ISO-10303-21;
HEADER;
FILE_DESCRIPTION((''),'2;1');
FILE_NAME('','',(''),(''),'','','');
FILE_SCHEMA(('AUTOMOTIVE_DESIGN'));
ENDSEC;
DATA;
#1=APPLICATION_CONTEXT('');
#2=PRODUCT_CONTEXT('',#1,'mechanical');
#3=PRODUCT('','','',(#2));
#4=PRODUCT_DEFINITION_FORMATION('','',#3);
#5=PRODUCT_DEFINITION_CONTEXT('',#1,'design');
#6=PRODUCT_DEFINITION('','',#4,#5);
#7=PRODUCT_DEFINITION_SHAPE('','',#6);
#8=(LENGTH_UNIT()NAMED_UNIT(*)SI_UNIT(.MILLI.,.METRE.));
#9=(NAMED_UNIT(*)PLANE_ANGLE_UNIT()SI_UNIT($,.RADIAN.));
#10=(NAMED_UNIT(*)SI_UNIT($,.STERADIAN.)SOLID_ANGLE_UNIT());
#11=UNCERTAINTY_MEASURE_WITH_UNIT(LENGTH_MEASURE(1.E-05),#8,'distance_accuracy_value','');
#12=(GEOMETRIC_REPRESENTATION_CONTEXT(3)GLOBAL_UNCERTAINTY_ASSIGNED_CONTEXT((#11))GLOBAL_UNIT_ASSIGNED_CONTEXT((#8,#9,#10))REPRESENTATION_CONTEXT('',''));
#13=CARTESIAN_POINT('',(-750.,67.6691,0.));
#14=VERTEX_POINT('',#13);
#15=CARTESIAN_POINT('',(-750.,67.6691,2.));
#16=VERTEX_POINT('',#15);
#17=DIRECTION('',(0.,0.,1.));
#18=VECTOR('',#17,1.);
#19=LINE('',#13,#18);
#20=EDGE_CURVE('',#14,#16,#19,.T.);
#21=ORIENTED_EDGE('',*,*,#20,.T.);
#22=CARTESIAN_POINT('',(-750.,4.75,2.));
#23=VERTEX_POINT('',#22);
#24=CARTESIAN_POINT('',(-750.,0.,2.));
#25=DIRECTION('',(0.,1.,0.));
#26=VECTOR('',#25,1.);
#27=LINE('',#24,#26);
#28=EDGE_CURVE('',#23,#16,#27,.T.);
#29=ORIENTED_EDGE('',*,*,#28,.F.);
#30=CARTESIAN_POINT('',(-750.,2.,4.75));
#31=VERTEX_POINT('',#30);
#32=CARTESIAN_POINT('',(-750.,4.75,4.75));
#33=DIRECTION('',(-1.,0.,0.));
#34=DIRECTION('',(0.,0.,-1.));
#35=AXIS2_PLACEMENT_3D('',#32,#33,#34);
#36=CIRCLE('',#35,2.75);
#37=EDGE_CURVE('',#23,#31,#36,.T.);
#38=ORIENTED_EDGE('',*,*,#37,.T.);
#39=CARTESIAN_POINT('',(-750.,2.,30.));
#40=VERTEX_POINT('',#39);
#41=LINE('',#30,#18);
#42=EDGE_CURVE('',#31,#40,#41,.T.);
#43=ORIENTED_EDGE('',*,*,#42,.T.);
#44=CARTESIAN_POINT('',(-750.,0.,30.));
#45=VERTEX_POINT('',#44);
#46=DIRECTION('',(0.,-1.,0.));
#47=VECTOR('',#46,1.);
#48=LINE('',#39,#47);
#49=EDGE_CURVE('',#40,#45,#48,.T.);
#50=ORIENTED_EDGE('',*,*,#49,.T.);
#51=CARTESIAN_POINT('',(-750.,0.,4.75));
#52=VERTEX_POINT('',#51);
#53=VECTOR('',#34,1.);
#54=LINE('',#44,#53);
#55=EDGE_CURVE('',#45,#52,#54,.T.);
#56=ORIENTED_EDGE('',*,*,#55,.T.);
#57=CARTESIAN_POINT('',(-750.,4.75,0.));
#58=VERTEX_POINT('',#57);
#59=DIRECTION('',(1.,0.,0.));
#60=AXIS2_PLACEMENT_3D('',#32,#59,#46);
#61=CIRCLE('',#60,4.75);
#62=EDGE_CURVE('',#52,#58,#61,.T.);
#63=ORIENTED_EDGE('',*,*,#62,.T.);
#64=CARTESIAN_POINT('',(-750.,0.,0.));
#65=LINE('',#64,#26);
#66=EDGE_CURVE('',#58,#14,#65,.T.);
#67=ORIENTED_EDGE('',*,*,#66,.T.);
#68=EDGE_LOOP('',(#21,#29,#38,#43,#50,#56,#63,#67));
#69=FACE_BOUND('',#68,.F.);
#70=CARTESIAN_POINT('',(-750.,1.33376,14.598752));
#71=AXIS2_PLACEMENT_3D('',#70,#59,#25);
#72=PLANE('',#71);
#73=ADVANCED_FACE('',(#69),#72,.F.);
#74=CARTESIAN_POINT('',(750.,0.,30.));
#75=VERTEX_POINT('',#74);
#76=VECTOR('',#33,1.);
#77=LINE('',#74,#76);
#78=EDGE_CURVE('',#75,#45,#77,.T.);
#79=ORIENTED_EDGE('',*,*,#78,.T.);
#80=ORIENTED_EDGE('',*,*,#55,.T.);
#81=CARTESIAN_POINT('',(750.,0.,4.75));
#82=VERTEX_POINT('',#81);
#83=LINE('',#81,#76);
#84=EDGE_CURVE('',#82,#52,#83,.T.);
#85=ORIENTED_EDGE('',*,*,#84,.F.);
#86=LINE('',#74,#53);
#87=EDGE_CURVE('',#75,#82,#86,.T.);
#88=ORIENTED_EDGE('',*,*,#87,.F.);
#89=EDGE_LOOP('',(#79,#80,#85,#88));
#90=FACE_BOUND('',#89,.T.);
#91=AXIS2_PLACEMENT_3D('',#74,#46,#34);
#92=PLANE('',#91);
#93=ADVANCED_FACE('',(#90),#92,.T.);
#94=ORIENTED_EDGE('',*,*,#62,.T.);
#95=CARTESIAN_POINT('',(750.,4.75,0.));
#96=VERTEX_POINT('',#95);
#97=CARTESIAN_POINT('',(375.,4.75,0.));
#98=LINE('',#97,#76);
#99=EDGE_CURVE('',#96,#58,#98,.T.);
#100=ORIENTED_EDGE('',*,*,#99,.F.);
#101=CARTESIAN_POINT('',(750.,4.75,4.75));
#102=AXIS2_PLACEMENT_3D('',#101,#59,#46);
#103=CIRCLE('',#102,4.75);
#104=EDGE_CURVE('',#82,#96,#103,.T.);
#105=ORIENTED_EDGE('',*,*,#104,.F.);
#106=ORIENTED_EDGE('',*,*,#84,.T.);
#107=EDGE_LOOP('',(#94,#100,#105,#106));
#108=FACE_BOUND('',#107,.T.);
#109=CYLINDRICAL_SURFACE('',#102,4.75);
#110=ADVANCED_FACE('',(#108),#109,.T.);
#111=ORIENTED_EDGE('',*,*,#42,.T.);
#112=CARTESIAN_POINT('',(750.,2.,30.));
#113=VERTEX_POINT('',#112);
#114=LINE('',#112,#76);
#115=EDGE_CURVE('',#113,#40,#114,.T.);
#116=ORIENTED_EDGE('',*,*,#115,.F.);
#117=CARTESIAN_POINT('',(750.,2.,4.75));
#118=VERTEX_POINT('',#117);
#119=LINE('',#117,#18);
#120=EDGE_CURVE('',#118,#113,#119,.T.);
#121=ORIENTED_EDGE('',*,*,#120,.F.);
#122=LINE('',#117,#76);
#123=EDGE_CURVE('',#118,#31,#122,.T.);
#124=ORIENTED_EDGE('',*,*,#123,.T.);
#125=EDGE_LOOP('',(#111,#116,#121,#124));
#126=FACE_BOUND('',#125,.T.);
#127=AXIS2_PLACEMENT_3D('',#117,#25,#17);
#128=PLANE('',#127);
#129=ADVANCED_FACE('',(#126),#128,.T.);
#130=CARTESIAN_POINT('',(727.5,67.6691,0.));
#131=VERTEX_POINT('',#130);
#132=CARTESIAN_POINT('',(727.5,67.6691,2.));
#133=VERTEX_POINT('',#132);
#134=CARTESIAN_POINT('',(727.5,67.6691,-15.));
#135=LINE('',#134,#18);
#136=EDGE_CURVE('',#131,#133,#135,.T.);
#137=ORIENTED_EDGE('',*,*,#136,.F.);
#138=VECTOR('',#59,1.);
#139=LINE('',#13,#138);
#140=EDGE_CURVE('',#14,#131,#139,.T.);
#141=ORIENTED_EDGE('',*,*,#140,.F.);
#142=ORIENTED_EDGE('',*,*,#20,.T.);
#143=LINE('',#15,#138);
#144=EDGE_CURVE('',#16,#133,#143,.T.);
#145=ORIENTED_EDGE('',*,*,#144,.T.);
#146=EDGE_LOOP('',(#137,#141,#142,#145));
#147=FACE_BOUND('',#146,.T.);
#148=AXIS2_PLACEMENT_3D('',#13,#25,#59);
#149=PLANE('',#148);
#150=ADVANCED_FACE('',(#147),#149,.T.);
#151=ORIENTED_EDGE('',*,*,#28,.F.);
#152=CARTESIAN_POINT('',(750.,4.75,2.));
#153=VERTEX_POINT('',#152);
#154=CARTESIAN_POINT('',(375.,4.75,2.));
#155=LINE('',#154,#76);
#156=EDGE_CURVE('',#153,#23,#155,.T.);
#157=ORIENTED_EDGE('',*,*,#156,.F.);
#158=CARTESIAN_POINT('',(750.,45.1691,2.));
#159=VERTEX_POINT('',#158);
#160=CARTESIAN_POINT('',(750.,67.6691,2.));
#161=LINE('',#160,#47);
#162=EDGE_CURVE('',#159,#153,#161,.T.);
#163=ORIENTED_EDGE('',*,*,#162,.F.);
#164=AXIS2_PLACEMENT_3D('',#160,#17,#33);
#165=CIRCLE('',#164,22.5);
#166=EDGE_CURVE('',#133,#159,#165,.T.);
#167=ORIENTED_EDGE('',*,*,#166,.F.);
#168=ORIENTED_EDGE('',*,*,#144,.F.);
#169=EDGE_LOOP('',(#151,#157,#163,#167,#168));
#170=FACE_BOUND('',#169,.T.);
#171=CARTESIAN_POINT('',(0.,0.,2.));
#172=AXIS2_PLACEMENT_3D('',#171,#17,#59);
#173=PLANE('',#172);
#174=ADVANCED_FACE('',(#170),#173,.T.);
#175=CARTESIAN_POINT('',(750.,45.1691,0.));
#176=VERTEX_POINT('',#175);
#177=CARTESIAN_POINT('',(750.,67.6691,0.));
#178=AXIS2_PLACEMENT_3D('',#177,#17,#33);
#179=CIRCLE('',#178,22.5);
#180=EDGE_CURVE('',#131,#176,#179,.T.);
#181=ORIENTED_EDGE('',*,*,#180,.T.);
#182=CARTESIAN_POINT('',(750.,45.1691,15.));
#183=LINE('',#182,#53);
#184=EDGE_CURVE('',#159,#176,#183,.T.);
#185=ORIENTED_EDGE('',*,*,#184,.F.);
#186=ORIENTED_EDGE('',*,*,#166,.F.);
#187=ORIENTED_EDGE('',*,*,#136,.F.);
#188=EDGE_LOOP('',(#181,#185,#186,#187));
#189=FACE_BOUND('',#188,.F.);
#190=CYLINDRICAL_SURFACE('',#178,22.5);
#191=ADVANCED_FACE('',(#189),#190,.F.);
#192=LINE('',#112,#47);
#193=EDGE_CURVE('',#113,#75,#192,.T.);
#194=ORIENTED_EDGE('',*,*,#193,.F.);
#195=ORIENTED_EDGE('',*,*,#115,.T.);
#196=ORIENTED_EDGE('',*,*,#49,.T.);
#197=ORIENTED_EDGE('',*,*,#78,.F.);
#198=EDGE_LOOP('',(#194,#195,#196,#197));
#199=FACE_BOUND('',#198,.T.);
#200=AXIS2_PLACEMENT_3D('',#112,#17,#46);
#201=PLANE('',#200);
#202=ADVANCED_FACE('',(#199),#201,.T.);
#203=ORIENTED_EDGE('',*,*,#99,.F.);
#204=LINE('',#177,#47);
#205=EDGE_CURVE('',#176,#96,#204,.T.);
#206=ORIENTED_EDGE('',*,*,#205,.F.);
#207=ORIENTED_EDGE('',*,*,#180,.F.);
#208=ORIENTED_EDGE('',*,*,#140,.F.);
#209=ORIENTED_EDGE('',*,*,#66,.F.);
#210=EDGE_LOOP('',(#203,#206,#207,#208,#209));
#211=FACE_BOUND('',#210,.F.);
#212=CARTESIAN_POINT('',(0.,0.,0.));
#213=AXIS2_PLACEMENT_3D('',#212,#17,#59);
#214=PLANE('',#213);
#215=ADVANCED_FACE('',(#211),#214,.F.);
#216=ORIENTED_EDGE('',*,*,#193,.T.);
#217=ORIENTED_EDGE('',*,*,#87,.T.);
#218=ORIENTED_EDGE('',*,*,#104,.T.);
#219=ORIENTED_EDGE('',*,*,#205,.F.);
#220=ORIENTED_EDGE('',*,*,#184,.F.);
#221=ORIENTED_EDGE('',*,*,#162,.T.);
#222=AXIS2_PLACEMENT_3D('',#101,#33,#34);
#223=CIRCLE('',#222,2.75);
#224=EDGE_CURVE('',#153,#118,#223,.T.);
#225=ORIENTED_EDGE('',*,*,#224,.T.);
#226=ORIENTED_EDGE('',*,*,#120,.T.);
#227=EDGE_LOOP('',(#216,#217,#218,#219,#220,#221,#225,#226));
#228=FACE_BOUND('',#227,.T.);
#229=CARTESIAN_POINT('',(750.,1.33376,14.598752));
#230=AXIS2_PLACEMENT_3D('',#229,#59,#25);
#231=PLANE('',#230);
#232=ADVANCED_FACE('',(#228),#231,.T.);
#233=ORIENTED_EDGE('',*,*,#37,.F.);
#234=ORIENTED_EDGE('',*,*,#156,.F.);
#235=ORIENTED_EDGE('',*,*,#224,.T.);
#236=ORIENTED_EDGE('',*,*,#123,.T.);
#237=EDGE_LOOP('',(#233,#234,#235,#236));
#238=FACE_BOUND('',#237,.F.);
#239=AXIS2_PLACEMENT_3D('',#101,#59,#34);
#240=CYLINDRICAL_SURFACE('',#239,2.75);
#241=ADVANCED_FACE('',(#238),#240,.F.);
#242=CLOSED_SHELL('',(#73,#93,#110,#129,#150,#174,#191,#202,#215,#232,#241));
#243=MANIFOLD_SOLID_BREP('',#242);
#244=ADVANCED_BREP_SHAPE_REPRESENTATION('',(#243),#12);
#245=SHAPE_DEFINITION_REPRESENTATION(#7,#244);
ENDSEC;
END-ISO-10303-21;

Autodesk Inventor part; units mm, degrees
ref_plane "YZ Plane" through (0, 0, 0) normal (1, 0, 0) x (0, 1, 0)
ref_plane "XZ Plane" through (0, 0, 0) normal (0, 1, 0) x (-1, 0, 0)
ref_plane "XY Plane" through (0, 0, 0) normal (0, 0, 1) x (1, 0, 0)
sketch "Sketch1" plane through (0, 0, 0) normal (0, 0, 1) x (1, 0, 0)
  line L0 (-750, 67.6691) -> (750, 67.6691)
  line L1 (750, 67.6691) -> (750, 0)
  line L2 (750, 0) -> (-750, 0)
  line L3 (-750, 0) -> (-750, 67.6691)
  point P0 (0, 0)
  point P1 (0, 0)
  dimension "d0" = 1500
  dimension "d1" = 67.669
extrude "Plate1" add sketch "Sketch1" along normal blind 2
sketch "Sketch2" plane through (750, 2, 0) normal (0, -1, 0) x (1, 0, 0)
  line L0 (-1500, 0) -> (0, 0)
  line L1 (0, 0) -> (0, 30)
  line L2 (0, 30) -> (-1500, 30)
  line L3 (-1500, 30) -> (-1500, 0)
edge flange "Flange1" height 30 angle 90 thickness 2 bend radius 2.75 thickness toward (0, -1, 0) relief round relief width 2 relief depth 1 edges at (0, 0, 2) wall of the first edge with corners at (-750, 2, 0) (750, 2, 0) (750, 2, 30) (-750, 2, 30)
bend "Bend1"
corner "Corner1"
sketch "Sketch6" plane through (0, 0, 0) normal (0, 0, -1) x (-1, 0, 0)
  line L0 (-750, 67.6691) -> (-750, 4.75) projected
  circle A0 centre (-750, 67.6691) radius 22.5
  line L1 (-750, 67.6691) -> (750, 67.6691) projected
  line L2 (-1, 67.6691) -> (-1, 30) projected
  line L3 (-499, 30) -> (-499, 67.6691) projected
  line L4 (-1, 30) -> (-499, 30) construction
  circle A1 centre (-250, 67.6691) radius 22.5
  point P0 (0, 0)
  point P1 (-727.5, 67.6691)
  point P2 (-750, 45.1691)
  point P3 (-250, 30)
  dimension "d24" = 45
extrude "Extrusion2" cut sketch "Sketch6" along normal mid plane 30 contours L1 A0 L0 picked at (-748.3311, 52.8571)
sketch "Sketch7" plane through (0, 0, 2) normal (0, 0, 1) x (1, 0, 0)
  line L0 (-750, 4.75) -> (-750, 67.6691) projected
  line L1 (-750, 4.75) -> (750, 4.75) projected
  line L2 (750, 45.1691) -> (750, 4.75) projected
  arc A0 (727.5, 67.6691) -> (750, 45.1691) centre (750, 67.6691) ccw projected
  line L3 (-750, 67.6691) -> (727.5, 67.6691) projected
  line L4 (649, 32.2095) -> (651, 32.2095)
  line L5 (651, 32.2095) -> (651, 40.2095)
  line L6 (651, 40.2095) -> (649, 40.2095)
  line L7 (649, 40.2095) -> (649, 32.2095)
  line L8 (-750, 4.75) -> (750, 4.75) projected
  line L9 (650, 4.75) -> (650, 67.6691) construction
  line L10 (637, 32.2095) -> (639, 32.2095)
  line L11 (639, 32.2095) -> (639, 40.2095)
  line L12 (639, 40.2095) -> (637, 40.2095)
  line L13 (637, 40.2095) -> (637, 32.2095)
  point P0 (0, 0)
  point P1 (650, 32.2095)
  point P2 (649, 36.2095)
  point P3 (650, 36.2095)
  point P4 (639, 36.2095)
  dimension "d30" = 2
  dimension "d31" = 8
  dimension "d32" = 100
  dimension "d33" = 2
  dimension "d34" = 8
  dimension "d35" = 10
extrude "Extrusion3" [suppressed]
mirror "Mirror2" [suppressed]
sketch "Sketch9" plane through (0, 0, 2) normal (0, 0, 1) x (1, 0, 0)
  line L0 (494, 62.6691) -> (494, 50.6691) construction
  line L1 (494, 50.6691) -> (294, 50.6691) construction
  line L2 (294, 50.6691) -> (294, 62.6691) construction
  line L3 (294, 62.6691) -> (494, 62.6691) construction
  line L4 (499, 30) -> (499, 67.6691) projected
  line L5 (-750, 67.6691) -> (750, 67.6691) projected
  point P0 (0, 0)
  point P1 (1, 67.6691)
  dimension "d40" = 200
  dimension "d41" = 12
  dimension "d42" = 5
  dimension "d43" = 5
mark "Mark2"
equation "\"d1\" = Стрингер_2"
equation "\"d43\" = d42"
equation "\"d2\" = Thickness"
equation "\"d3\" = BendReliefWidth"
equation "\"d4\" = BendReliefDepth"
equation "\"d5\" = MinimumRemnant"
equation "\"d6\" = TransitionRadius"
equation "\"d9\" = BendRadius"
equation "\"d10\" = CornerReliefSize"
equation "\"d11\" = GapSize"
equation "\"d12\" = JacobiRadiusSize"
equation "\"BendReliefWidth\" = Thickness"
equation "\"BendReliefDepth\" = 0.5 * Thickness"
equation "\"CornerReliefSize\" = 4 * Thickness"
equation "\"MinimumRemnant\" = 2 * Thickness"
equation "\"TransitionRadius\" = BendRadius"
equation "\"JacobiRadiusSize\" = BendRadius"
equation "\"GapSize\" = Thickness"
equation "\"qqqqqq\" = 67.35706"
equation "\"Стрингер_2\" = 67.669053"
equation "\"Thickness\" = 2"
equation "\"BendRadius\" = 2.75"
properties part number "МОО 068 stringer lowerback" material "Stainless Steel"
